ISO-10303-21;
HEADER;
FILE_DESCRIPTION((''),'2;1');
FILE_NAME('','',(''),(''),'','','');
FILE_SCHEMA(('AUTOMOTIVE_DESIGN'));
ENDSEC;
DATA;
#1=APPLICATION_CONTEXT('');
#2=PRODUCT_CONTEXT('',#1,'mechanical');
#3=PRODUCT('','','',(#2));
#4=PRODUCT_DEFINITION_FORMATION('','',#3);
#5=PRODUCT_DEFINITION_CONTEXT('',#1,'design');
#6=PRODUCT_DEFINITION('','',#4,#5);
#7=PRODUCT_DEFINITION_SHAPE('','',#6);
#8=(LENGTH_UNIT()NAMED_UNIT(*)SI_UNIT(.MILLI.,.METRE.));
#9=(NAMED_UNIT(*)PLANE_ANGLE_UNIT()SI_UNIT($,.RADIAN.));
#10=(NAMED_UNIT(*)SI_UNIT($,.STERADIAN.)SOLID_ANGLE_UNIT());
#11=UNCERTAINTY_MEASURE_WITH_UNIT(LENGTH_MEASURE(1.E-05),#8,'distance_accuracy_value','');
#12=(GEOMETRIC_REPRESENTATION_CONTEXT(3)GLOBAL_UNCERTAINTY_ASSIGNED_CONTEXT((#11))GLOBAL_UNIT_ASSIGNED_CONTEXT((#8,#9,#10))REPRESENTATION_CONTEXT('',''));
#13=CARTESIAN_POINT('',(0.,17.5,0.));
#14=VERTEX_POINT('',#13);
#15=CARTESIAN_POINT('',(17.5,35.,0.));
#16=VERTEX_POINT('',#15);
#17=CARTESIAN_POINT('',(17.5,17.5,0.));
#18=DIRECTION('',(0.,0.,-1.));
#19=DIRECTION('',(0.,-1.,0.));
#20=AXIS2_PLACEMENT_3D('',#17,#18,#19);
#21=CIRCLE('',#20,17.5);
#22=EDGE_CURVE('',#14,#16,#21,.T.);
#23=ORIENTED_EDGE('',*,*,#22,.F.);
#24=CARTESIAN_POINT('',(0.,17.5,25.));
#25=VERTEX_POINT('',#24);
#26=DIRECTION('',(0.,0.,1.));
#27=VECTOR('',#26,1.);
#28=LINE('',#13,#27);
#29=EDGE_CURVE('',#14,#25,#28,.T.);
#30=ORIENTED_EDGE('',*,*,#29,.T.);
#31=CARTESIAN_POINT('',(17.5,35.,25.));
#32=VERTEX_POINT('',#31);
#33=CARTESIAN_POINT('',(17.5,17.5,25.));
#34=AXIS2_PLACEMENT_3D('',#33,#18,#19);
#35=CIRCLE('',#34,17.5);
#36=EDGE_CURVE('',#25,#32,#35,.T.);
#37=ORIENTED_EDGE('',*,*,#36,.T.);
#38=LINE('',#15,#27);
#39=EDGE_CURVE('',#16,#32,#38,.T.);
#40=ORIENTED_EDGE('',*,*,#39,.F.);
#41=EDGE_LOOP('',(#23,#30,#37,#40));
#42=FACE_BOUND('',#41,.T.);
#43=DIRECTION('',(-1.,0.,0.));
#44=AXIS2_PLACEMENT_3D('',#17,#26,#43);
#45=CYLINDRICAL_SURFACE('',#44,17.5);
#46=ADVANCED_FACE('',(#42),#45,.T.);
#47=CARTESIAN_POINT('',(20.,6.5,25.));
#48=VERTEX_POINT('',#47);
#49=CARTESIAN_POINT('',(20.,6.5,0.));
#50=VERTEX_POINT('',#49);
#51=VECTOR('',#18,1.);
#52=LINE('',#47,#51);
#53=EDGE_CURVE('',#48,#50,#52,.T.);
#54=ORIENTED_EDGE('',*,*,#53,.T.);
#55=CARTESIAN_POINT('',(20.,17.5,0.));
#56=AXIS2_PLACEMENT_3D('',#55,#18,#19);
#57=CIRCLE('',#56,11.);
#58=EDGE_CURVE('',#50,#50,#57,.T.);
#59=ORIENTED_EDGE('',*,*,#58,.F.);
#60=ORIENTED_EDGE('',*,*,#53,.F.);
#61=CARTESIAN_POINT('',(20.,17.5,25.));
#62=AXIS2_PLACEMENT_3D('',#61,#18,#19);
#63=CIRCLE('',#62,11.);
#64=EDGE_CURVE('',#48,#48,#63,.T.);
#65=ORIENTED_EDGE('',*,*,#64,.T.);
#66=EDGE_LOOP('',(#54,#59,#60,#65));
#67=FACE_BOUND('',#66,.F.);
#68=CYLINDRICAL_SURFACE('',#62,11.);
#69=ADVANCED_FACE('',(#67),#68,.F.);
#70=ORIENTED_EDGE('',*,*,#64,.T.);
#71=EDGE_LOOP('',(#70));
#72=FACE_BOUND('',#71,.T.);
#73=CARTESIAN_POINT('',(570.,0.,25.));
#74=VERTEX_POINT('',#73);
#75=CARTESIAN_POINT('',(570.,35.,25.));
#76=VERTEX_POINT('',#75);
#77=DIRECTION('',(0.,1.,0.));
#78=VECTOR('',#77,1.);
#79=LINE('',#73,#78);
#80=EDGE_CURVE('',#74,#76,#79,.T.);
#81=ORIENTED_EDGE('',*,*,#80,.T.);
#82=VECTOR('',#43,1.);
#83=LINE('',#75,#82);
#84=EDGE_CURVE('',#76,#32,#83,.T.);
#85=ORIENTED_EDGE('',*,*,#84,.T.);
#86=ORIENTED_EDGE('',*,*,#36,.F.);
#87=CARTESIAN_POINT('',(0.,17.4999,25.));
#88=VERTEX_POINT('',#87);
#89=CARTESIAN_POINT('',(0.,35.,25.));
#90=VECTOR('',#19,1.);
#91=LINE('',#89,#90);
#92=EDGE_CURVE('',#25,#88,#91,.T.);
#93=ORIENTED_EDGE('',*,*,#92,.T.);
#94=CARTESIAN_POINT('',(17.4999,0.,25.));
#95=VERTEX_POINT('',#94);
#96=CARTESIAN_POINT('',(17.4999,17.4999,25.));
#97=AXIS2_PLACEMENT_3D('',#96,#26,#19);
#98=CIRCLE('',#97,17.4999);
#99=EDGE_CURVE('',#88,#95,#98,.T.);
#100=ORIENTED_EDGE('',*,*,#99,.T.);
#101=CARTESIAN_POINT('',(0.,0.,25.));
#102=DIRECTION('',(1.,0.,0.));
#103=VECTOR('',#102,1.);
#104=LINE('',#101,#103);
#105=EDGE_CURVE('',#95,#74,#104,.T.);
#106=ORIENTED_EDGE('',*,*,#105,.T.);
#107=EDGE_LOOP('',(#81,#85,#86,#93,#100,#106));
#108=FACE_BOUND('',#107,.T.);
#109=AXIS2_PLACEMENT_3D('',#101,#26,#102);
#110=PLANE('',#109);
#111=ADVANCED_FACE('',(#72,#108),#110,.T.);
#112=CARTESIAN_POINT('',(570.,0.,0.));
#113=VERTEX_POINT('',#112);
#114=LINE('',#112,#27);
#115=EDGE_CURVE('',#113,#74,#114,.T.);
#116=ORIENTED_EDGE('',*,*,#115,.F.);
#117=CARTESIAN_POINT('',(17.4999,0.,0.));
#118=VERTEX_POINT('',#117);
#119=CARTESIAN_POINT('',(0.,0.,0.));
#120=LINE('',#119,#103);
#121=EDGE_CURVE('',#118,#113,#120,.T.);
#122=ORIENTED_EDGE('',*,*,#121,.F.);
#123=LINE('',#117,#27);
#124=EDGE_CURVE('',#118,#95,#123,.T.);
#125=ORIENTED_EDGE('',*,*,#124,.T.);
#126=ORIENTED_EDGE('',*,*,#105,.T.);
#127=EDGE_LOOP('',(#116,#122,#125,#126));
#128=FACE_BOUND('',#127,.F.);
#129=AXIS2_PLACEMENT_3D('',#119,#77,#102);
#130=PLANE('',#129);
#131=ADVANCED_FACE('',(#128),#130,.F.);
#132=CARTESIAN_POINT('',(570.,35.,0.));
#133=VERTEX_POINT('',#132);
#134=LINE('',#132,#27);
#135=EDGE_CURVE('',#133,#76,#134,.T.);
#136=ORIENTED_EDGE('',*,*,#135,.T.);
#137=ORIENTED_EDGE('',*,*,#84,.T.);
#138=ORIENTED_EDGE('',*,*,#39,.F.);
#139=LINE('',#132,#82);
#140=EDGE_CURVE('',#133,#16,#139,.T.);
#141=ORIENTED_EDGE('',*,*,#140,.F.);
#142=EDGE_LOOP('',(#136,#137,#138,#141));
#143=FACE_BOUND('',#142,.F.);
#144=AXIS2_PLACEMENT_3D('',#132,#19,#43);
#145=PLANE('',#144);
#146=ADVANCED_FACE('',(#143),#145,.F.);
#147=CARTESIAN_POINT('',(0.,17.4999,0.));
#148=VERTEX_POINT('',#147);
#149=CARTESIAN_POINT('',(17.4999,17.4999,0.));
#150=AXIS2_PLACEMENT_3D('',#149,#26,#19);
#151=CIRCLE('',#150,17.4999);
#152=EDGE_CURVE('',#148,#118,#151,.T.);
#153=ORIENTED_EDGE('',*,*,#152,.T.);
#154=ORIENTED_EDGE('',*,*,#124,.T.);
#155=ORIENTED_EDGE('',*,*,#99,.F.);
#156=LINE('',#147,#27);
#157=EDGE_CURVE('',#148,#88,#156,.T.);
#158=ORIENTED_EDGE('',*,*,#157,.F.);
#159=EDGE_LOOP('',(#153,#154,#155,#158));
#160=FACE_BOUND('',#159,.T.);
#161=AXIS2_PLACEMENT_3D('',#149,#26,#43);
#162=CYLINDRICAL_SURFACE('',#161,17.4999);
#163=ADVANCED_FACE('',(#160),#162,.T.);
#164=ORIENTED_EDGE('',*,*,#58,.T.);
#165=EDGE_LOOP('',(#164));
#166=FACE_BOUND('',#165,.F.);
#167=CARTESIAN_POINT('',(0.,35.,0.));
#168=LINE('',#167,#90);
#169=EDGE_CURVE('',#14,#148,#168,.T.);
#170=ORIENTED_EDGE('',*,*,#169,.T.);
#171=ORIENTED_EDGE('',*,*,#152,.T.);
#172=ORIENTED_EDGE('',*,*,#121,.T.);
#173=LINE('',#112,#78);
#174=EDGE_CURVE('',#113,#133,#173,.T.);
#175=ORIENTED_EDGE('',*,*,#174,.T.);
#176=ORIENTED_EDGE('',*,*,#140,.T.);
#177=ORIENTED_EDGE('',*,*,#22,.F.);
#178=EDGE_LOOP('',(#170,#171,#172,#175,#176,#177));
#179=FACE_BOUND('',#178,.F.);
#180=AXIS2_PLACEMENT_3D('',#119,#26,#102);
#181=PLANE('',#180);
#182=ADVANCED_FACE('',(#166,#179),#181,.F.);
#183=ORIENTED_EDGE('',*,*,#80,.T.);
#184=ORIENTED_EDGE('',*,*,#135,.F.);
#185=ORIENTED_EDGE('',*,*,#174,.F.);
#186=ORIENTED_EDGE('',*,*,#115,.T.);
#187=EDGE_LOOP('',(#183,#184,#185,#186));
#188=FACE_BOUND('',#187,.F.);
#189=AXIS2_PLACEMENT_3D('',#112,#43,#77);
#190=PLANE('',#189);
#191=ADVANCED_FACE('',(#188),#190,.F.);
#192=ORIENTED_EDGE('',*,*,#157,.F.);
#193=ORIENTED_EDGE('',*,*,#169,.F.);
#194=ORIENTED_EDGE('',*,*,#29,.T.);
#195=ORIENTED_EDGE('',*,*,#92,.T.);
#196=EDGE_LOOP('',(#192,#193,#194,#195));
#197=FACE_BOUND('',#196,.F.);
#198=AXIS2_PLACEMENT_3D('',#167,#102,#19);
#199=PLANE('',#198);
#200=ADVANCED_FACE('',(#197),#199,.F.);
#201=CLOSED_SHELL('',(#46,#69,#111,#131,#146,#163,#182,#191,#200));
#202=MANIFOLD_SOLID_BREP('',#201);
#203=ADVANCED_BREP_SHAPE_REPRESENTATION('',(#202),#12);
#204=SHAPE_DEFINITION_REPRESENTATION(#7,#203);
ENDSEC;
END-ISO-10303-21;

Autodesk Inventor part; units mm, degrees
ref_plane "YZ Plane" through (0, 0, 0) normal (1, 0, 0) x (0, 1, 0)
ref_plane "XZ Plane" through (0, 0, 0) normal (0, 1, 0) x (-1, 0, 0)
ref_plane "XY Plane" through (0, 0, 0) normal (0, 0, 1) x (1, 0, 0)
sketch "Sketch3" plane through (0, 0, 0) normal (0, 0, 1) x (1, 0, 0)
  line L0 (0, 0) -> (570, 0)
  line L1 (570, 0) -> (570, 35)
  line L2 (570, 35) -> (0, 35)
  line L3 (0, 35) -> (0, 0)
  dimension "d3" = 570
  dimension "d4" = 35
extrude "Extrusion2" add sketch "Sketch3" along normal blind 25
sketch "Sketch4" plane through (0, 0, 25) normal (0, 0, 1) x (1, 0, 0)
  point P0 (0, 0)
sketch "Sketch5" plane through (0, 0, 25) normal (0, 0, 1) x (1, 0, 0)
  line L0 (0, 35) -> (0, 0) projected
  point P0 (20, 17.5)
hole "Hole1" at (20, 17.5, 25) direction (0, 0, -1) diameter 22 end through all
fillet "Fillet4" radius 17.5 1 edges at (0, 35, 12.5)
fillet "Fillet5" radius 17.5 1 edges at (0, 0, 12.5)
properties part number "RoboArm 2020 Arm"
